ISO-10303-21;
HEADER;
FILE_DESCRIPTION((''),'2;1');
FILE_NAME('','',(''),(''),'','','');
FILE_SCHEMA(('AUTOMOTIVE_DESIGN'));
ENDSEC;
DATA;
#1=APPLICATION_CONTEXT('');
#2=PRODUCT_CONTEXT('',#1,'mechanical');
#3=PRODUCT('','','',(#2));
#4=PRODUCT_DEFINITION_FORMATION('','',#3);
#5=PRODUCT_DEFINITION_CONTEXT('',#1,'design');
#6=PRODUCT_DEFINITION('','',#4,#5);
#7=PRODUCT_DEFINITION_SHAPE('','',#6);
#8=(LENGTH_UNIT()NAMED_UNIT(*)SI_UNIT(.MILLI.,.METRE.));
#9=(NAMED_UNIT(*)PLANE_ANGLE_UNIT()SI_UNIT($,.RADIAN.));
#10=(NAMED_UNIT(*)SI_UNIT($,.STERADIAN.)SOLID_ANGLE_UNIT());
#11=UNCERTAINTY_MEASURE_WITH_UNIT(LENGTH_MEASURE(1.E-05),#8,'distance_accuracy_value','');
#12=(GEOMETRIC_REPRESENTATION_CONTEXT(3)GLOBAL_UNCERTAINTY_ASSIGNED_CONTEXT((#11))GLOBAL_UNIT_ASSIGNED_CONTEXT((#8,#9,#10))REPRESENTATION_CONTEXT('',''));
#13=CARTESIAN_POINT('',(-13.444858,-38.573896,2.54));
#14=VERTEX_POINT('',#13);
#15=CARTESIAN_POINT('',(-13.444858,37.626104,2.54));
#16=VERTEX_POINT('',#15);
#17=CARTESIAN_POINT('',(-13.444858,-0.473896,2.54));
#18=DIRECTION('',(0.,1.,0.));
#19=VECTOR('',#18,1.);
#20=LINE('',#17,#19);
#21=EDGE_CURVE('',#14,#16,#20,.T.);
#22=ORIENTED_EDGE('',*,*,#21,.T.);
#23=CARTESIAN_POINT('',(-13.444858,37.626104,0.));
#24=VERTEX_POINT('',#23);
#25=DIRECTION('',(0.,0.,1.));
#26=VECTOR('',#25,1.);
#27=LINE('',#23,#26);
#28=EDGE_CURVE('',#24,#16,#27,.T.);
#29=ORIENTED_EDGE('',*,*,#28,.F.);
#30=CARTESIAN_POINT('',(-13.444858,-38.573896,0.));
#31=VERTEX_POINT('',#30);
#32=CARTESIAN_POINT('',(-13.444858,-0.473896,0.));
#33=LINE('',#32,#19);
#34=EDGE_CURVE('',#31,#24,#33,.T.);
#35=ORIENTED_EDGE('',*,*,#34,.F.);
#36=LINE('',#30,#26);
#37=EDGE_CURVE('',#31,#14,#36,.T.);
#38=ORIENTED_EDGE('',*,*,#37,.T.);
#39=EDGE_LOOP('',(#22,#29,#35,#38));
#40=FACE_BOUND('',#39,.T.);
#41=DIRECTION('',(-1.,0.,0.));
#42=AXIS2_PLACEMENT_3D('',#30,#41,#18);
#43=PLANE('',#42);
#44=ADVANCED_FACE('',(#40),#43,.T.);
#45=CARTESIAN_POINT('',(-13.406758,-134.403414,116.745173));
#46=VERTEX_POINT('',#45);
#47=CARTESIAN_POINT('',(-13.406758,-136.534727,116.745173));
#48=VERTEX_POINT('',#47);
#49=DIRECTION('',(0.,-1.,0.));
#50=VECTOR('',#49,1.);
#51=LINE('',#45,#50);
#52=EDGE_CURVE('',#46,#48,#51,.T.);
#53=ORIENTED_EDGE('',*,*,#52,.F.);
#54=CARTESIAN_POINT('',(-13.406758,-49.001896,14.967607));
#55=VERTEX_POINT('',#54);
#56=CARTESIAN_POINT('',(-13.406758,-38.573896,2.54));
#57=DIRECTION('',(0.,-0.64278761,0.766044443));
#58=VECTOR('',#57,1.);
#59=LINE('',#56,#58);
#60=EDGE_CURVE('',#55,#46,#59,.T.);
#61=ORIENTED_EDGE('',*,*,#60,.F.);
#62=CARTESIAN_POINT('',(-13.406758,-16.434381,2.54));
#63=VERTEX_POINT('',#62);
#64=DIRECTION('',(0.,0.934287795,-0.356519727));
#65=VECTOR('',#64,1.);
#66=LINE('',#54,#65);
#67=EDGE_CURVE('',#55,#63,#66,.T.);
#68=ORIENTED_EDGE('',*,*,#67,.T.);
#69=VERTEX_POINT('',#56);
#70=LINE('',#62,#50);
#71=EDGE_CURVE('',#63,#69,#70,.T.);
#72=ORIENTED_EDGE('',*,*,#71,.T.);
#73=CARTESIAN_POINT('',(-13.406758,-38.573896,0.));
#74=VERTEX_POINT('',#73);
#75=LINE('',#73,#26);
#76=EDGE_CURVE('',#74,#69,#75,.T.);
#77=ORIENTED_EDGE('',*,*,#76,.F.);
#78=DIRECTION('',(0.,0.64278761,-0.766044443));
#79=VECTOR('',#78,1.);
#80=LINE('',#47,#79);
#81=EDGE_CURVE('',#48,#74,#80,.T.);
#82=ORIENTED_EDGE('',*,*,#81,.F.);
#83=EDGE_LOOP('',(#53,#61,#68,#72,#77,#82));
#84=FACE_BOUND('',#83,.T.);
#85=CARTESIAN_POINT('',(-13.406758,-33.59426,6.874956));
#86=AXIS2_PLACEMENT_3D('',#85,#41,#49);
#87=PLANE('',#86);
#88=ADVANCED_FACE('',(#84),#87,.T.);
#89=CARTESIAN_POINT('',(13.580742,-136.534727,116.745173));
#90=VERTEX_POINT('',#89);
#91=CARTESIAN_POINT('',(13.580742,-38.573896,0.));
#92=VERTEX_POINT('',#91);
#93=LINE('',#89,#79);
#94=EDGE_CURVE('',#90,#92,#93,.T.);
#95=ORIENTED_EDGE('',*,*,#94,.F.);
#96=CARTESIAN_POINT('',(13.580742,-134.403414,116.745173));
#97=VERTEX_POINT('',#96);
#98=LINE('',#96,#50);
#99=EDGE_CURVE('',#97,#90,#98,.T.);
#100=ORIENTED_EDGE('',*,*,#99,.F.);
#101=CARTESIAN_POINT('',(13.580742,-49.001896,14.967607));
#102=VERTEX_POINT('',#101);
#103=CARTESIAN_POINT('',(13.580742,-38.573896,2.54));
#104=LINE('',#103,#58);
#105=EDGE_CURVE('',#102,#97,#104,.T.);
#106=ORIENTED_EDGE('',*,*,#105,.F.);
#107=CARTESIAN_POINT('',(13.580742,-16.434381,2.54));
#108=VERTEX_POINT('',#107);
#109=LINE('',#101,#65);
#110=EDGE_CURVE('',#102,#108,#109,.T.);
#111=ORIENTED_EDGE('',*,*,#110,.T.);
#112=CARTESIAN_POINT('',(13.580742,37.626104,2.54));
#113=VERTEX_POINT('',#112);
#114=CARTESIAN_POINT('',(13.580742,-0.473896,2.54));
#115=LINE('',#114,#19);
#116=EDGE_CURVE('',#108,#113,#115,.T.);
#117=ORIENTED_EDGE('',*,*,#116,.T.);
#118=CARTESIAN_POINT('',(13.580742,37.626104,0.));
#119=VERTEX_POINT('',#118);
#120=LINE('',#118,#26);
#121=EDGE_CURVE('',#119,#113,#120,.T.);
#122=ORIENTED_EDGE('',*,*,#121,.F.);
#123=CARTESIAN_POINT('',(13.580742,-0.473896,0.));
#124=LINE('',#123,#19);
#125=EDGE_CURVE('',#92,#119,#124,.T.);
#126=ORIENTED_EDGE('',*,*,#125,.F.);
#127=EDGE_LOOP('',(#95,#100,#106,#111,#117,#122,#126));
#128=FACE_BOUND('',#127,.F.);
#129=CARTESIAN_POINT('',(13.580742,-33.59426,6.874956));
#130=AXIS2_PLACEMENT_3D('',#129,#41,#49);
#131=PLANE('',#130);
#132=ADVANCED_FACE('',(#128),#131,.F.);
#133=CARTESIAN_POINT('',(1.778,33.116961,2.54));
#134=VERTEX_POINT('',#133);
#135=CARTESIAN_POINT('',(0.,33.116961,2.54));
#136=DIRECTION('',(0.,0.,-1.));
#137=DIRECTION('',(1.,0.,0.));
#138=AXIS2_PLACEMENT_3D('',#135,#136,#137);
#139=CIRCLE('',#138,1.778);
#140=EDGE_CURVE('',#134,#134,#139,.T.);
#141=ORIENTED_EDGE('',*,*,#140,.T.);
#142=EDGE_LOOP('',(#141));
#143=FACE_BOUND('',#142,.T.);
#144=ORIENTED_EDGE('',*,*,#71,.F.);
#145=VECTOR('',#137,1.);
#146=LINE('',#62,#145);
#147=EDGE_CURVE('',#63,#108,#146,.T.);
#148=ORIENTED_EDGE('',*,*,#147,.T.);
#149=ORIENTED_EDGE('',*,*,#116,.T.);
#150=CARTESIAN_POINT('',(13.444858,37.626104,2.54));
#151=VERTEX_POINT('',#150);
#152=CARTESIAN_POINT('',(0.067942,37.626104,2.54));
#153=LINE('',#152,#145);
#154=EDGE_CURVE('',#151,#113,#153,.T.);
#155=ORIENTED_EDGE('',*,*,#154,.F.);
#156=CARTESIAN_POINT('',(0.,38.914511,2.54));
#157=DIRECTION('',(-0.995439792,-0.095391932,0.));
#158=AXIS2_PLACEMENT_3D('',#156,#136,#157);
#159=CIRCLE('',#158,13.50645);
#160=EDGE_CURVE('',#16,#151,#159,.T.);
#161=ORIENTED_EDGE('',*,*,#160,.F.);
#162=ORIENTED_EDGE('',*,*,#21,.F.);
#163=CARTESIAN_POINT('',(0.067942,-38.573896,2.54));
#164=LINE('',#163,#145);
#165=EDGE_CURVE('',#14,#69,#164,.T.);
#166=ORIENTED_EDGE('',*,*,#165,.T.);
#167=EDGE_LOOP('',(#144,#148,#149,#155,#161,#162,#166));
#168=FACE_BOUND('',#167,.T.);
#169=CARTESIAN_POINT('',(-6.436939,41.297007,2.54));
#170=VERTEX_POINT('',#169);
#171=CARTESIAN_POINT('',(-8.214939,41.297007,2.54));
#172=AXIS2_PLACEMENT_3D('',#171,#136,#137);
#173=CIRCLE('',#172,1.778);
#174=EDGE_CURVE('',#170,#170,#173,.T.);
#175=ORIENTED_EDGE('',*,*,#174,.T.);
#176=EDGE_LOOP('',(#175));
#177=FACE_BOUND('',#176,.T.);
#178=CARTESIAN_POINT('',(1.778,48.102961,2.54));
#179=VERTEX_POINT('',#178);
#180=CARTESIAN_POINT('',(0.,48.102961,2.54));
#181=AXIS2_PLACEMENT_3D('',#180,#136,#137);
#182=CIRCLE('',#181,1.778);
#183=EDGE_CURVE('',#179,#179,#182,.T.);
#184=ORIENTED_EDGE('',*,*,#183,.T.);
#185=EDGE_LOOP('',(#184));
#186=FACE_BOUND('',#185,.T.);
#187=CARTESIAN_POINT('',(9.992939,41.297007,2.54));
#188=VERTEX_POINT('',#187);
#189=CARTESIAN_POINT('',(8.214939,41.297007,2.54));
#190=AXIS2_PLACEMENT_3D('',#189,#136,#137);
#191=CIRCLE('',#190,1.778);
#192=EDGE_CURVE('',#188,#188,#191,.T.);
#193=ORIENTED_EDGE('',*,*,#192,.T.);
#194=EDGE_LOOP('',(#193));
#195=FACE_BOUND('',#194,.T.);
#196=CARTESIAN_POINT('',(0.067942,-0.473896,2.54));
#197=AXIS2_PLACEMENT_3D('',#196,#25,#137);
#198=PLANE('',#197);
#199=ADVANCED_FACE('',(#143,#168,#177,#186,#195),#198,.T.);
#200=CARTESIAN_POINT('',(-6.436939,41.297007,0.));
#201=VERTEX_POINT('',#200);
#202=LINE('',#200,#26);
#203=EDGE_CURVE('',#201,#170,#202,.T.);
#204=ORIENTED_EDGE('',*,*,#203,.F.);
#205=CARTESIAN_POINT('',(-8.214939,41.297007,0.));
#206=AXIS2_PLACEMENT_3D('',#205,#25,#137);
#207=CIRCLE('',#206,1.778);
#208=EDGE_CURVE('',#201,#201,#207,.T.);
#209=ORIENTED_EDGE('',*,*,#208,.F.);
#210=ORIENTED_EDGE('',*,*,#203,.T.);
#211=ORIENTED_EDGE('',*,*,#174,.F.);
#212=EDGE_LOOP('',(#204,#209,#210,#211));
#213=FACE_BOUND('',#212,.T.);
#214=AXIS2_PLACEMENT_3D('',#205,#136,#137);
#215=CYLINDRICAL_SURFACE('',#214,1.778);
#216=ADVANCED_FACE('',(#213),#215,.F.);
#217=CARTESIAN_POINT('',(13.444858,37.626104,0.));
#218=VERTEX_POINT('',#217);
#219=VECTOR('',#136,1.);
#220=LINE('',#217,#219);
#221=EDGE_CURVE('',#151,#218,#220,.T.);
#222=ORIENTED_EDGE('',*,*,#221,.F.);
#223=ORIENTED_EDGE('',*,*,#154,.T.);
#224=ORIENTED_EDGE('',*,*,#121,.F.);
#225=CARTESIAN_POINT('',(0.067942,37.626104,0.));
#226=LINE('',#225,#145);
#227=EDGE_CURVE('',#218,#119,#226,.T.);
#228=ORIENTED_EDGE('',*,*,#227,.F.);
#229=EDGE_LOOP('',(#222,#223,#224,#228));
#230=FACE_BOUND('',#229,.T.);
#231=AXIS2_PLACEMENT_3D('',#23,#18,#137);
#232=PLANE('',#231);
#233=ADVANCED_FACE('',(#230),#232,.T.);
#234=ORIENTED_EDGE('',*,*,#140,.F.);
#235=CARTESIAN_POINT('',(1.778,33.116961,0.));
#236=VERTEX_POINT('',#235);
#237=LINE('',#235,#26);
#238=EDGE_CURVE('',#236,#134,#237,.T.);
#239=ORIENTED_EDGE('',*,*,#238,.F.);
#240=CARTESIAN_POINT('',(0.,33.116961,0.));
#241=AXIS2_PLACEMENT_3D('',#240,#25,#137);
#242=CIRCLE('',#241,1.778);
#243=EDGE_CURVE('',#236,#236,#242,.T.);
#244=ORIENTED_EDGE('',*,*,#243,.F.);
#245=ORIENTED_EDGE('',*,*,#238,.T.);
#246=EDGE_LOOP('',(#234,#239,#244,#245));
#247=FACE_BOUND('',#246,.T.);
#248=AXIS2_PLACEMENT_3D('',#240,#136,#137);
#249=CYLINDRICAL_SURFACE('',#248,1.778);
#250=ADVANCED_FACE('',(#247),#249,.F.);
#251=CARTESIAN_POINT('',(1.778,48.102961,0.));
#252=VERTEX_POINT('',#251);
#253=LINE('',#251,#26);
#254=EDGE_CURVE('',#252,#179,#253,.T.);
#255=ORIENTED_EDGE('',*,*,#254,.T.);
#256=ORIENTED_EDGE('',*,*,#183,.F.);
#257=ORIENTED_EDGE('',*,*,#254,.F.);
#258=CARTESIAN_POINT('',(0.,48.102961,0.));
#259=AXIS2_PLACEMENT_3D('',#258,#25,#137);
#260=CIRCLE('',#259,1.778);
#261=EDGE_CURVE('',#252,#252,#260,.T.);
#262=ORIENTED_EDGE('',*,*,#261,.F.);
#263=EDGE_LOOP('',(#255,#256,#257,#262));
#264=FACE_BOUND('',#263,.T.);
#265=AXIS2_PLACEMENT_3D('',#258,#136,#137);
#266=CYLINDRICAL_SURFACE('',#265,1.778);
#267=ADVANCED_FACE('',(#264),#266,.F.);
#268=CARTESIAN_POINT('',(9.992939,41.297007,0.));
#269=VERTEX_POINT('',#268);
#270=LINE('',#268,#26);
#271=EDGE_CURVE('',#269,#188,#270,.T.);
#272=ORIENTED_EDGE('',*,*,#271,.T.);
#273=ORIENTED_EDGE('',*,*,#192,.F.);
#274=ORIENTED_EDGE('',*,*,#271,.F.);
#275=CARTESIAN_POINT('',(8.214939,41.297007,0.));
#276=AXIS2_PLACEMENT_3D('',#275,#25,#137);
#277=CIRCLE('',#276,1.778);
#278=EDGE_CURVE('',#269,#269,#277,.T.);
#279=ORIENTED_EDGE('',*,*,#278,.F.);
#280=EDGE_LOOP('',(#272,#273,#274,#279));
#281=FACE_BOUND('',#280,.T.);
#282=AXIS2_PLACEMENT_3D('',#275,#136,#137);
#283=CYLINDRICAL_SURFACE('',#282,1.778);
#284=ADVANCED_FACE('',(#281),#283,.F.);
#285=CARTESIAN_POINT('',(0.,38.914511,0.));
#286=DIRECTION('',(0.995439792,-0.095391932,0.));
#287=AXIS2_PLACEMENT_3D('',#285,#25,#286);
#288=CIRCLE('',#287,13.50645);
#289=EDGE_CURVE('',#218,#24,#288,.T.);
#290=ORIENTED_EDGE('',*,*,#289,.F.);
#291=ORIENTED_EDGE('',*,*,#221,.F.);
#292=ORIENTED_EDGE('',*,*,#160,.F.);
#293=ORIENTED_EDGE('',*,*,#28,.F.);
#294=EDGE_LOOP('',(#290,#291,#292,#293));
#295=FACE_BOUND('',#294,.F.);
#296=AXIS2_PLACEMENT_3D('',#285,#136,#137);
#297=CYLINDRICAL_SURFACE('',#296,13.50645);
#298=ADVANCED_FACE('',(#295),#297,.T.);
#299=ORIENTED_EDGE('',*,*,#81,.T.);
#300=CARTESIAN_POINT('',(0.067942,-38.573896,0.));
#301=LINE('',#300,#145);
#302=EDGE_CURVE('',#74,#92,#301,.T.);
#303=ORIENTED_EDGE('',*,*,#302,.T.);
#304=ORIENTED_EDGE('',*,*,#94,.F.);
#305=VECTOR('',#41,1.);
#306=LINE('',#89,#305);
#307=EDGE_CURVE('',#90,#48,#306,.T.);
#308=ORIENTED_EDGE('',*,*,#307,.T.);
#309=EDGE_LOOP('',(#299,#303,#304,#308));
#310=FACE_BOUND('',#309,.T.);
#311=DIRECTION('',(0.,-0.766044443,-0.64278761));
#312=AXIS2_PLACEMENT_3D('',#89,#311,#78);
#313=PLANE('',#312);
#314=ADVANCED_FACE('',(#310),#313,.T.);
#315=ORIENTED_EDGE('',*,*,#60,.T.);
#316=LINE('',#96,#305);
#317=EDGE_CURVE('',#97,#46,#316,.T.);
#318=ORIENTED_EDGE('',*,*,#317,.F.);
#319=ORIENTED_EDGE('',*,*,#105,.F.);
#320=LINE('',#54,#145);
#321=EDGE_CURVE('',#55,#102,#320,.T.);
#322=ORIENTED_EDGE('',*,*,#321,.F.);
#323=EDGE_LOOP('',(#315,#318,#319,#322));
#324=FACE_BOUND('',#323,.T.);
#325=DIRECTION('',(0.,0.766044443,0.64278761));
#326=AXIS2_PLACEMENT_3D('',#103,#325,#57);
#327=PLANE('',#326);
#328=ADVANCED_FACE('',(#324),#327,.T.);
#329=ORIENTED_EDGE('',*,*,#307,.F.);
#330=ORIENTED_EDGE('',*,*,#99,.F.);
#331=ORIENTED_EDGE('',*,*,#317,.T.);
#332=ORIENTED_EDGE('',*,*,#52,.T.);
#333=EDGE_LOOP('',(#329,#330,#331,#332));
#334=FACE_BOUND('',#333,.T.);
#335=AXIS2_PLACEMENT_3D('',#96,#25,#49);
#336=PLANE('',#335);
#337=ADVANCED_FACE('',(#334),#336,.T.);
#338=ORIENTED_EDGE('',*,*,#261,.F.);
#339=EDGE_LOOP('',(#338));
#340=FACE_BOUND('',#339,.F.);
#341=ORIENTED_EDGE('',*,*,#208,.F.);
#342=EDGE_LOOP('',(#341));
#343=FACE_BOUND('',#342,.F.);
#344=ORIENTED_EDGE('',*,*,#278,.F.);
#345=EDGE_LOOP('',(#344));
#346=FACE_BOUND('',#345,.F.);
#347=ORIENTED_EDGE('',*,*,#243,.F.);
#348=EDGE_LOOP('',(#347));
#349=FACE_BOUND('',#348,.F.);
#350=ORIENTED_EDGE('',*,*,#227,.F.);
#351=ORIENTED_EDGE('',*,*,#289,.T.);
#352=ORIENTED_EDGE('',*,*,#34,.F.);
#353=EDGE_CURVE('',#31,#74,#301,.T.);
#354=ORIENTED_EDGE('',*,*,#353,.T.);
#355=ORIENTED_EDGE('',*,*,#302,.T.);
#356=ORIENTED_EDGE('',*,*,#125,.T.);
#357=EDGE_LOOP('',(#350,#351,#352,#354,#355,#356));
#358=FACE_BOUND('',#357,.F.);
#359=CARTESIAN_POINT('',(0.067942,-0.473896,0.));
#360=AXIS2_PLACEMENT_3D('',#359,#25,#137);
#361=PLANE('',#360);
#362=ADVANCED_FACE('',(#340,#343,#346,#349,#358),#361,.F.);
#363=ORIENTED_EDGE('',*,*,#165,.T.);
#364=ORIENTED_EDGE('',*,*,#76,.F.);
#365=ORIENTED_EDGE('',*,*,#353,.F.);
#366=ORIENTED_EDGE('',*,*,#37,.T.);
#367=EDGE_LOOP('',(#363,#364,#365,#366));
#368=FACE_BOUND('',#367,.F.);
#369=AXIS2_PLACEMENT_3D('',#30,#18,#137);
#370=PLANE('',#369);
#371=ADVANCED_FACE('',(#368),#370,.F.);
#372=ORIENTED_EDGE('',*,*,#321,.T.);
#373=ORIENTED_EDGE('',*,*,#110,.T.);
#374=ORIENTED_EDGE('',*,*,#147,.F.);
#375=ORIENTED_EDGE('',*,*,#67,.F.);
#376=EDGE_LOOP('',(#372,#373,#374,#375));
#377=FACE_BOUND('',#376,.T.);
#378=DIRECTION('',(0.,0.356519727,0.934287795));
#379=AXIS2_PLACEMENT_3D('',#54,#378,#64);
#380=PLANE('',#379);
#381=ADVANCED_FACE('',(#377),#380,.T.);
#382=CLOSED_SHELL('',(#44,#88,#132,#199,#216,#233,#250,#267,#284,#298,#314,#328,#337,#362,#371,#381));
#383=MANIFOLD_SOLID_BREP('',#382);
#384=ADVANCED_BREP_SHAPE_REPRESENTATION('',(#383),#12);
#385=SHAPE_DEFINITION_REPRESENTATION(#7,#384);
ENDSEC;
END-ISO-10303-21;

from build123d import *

# Parameters (mm, degrees)
F0_R      = 13.50645
F1_DEPTH  = 2.54
F2_W      = 27.0256
F2_H      = 76.2
F3_DEPTH  = 2.54
F4_R      = 1.778
F5_DEPTH  = 2.541
F7_DEPTH  = 26.9875
F9_DEPTH  = 26.9875
F10_R     = 60.96
F10_W     = 26.9875
F10_H     = 2.1313130632
F11_DEPTH = 50.8
F12_R     = 56.5455680067
F13_DEPTH = 116.7461731313
F15_DEPTH = 50.801
F17_DEPTH = 50.8
F19_DEPTH = 25.4
F20_DEPTH = 26.9875
F21_DEPTH = 25.4


# Not quite as in the source:
# - a feature names something its author has since deleted; it is built from what else it names


with BuildPart() as f1:
    # F0 (on Top) → F1 (new body)
    with BuildSketch(Plane.XY):
        with Locations((0, 38.9145108197)):
            Circle(F0_R)
    extrude(amount=F1_DEPTH)

    # F2 (on Top) → F3 (join)
    with BuildSketch(Plane.XY):
        with Locations((0.0679422232, -0.4738955459)):
            Rectangle(F2_W, F2_H)
    extrude(amount=F3_DEPTH)

    # F4 (on Top) → F5 (cut, through all)
    with BuildSketch(Plane.XY):
        with Locations((-8.2149387259, 41.2970071224)):
            Circle(F4_R)
        with Locations((0, 48.1029608197)):
            Circle(F4_R)
        with Locations((0, 33.1169608197)):
            Circle(F4_R)
        with Locations((8.2149387259, 41.2970071224)):
            Circle(F4_R)
    extrude(amount=F5_DEPTH, mode=Mode.SUBTRACT)

    # F6 (on face) → F7 (join)
    with BuildSketch(Plane.YZ.offset(13.5807422232)):
        Polygon((-136.5347272621, 116.7451731313), (-38.5738955459, 0), (-38.5738955459, 2.54), (-134.4034141989, 116.7451731313), align=None)
    extrude(amount=-F7_DEPTH)

    # F8 (on face) → F9 (join)
    with BuildSketch(Plane(origin=(-13.4067577768, 0, 0), x_dir=(0, -1, 0), z_dir=(-1, 0, 0))):
        Polygon((38.5738955459, 2.54), (49.0018958172, 14.9676067869), (16.4343814087, 2.54), align=None)
    extrude(amount=-F9_DEPTH)


with BuildPart() as f11:
    # F10 (on face) → F11 (new body)
    with BuildSketch(Plane.XY.offset(116.7451731313)):
        with Locations((0, -175.3809303045)):
            Circle(F10_R)
        with Locations((0.0869922232, -135.4690707305)):
            Rectangle(F10_W, F10_H, mode=Mode.SUBTRACT)
    extrude(amount=-F11_DEPTH)

    # F12 (on face) → F13 (cut, through all)
    with BuildSketch(Plane.XY.offset(116.7451731313)):
        with Locations((-8.7670916691, -175.4986345768)):
            Circle(F12_R)
    extrude(amount=-F13_DEPTH, mode=Mode.SUBTRACT)

    # F14 (on face) → F15 (cut, through all)
    with BuildSketch(Plane(origin=(0, 0, 65.9451731313), x_dir=(1, 0, 0), z_dir=(0, 0, -1))):
        with BuildLine():
            ThreePointArc((-34.6411562373, 125.2200701191), (-26.8424040995, 120.6487921939), (-18.4533903647, 117.2810681356))
            Line((-18.4533903647, 117.2810681356), (-18.4533903647, 119.7888788891))
            ThreePointArc((-18.4533903647, 119.7888788891), (-26.7534564605, 121.8899417854), (-34.6411562373, 125.2200701191))
        make_face()
    extrude(amount=-F15_DEPTH, mode=Mode.SUBTRACT)

    # F16 (on face) → F17 (cut)
    with BuildSketch(Plane(origin=(0, 0, 65.9451731313), x_dir=(1, 0, 0), z_dir=(0, 0, -1))):
        with BuildLine():
            Line((-12.9449410231, 231.889651911), (-12.9449410231, 234.9506382265))
            ThreePointArc((-12.9449410231, 234.9506382265), (-23.5006925786, 231.6289440324), (-33.2820246218, 226.4537061942))
            ThreePointArc((-33.2820246218, 226.4537061942), (-23.3686777331, 230.1264200492), (-12.9449410231, 231.889651911))
        make_face()
    extrude(amount=-F17_DEPTH, mode=Mode.SUBTRACT)


with BuildPart() as f19:
    # F18 (on face) → F19 (new body)
    with BuildSketch(Plane(origin=(-13.4067577768, 0, 0), x_dir=(0, -1, 0), z_dir=(-1, 0, 0))):
        Polygon((116.024311172, 92.3018110703), (105.3223571677, 79.5477189379), (117.2810681356, 79.5477189379), align=None)
    extrude(amount=F19_DEPTH)


with BuildPart() as f20:
    # F18 (on face) → F20 (new body)
    with BuildSketch(Plane(origin=(-13.4067577768, 0, 0), x_dir=(0, -1, 0), z_dir=(-1, 0, 0))):
        Polygon((116.024311172, 92.3018110703), (105.3223571677, 79.5477189379), (117.2810681356, 79.5477189379), align=None)
    extrude(amount=-F20_DEPTH)


with BuildPart() as f21_tool:
    # F21 (cut): a face of the model
    f21_faces = [f19.part.faces().sort_by_distance(p)[0] for p in [
        (-38.8067577768, -112.8759121584, 83.7990829821),
    ]]
    extrude(f21_faces, amount=-F21_DEPTH)


with BuildPart() as f11_1:
    add(f11.part)

    # F21: cut by f21_tool
    add(f21_tool.part, mode=Mode.SUBTRACT)


with BuildPart() as f19_1:
    add(f19.part)

    # F21: cut by f21_tool
    add(f21_tool.part, mode=Mode.SUBTRACT)


solid = f1.part
